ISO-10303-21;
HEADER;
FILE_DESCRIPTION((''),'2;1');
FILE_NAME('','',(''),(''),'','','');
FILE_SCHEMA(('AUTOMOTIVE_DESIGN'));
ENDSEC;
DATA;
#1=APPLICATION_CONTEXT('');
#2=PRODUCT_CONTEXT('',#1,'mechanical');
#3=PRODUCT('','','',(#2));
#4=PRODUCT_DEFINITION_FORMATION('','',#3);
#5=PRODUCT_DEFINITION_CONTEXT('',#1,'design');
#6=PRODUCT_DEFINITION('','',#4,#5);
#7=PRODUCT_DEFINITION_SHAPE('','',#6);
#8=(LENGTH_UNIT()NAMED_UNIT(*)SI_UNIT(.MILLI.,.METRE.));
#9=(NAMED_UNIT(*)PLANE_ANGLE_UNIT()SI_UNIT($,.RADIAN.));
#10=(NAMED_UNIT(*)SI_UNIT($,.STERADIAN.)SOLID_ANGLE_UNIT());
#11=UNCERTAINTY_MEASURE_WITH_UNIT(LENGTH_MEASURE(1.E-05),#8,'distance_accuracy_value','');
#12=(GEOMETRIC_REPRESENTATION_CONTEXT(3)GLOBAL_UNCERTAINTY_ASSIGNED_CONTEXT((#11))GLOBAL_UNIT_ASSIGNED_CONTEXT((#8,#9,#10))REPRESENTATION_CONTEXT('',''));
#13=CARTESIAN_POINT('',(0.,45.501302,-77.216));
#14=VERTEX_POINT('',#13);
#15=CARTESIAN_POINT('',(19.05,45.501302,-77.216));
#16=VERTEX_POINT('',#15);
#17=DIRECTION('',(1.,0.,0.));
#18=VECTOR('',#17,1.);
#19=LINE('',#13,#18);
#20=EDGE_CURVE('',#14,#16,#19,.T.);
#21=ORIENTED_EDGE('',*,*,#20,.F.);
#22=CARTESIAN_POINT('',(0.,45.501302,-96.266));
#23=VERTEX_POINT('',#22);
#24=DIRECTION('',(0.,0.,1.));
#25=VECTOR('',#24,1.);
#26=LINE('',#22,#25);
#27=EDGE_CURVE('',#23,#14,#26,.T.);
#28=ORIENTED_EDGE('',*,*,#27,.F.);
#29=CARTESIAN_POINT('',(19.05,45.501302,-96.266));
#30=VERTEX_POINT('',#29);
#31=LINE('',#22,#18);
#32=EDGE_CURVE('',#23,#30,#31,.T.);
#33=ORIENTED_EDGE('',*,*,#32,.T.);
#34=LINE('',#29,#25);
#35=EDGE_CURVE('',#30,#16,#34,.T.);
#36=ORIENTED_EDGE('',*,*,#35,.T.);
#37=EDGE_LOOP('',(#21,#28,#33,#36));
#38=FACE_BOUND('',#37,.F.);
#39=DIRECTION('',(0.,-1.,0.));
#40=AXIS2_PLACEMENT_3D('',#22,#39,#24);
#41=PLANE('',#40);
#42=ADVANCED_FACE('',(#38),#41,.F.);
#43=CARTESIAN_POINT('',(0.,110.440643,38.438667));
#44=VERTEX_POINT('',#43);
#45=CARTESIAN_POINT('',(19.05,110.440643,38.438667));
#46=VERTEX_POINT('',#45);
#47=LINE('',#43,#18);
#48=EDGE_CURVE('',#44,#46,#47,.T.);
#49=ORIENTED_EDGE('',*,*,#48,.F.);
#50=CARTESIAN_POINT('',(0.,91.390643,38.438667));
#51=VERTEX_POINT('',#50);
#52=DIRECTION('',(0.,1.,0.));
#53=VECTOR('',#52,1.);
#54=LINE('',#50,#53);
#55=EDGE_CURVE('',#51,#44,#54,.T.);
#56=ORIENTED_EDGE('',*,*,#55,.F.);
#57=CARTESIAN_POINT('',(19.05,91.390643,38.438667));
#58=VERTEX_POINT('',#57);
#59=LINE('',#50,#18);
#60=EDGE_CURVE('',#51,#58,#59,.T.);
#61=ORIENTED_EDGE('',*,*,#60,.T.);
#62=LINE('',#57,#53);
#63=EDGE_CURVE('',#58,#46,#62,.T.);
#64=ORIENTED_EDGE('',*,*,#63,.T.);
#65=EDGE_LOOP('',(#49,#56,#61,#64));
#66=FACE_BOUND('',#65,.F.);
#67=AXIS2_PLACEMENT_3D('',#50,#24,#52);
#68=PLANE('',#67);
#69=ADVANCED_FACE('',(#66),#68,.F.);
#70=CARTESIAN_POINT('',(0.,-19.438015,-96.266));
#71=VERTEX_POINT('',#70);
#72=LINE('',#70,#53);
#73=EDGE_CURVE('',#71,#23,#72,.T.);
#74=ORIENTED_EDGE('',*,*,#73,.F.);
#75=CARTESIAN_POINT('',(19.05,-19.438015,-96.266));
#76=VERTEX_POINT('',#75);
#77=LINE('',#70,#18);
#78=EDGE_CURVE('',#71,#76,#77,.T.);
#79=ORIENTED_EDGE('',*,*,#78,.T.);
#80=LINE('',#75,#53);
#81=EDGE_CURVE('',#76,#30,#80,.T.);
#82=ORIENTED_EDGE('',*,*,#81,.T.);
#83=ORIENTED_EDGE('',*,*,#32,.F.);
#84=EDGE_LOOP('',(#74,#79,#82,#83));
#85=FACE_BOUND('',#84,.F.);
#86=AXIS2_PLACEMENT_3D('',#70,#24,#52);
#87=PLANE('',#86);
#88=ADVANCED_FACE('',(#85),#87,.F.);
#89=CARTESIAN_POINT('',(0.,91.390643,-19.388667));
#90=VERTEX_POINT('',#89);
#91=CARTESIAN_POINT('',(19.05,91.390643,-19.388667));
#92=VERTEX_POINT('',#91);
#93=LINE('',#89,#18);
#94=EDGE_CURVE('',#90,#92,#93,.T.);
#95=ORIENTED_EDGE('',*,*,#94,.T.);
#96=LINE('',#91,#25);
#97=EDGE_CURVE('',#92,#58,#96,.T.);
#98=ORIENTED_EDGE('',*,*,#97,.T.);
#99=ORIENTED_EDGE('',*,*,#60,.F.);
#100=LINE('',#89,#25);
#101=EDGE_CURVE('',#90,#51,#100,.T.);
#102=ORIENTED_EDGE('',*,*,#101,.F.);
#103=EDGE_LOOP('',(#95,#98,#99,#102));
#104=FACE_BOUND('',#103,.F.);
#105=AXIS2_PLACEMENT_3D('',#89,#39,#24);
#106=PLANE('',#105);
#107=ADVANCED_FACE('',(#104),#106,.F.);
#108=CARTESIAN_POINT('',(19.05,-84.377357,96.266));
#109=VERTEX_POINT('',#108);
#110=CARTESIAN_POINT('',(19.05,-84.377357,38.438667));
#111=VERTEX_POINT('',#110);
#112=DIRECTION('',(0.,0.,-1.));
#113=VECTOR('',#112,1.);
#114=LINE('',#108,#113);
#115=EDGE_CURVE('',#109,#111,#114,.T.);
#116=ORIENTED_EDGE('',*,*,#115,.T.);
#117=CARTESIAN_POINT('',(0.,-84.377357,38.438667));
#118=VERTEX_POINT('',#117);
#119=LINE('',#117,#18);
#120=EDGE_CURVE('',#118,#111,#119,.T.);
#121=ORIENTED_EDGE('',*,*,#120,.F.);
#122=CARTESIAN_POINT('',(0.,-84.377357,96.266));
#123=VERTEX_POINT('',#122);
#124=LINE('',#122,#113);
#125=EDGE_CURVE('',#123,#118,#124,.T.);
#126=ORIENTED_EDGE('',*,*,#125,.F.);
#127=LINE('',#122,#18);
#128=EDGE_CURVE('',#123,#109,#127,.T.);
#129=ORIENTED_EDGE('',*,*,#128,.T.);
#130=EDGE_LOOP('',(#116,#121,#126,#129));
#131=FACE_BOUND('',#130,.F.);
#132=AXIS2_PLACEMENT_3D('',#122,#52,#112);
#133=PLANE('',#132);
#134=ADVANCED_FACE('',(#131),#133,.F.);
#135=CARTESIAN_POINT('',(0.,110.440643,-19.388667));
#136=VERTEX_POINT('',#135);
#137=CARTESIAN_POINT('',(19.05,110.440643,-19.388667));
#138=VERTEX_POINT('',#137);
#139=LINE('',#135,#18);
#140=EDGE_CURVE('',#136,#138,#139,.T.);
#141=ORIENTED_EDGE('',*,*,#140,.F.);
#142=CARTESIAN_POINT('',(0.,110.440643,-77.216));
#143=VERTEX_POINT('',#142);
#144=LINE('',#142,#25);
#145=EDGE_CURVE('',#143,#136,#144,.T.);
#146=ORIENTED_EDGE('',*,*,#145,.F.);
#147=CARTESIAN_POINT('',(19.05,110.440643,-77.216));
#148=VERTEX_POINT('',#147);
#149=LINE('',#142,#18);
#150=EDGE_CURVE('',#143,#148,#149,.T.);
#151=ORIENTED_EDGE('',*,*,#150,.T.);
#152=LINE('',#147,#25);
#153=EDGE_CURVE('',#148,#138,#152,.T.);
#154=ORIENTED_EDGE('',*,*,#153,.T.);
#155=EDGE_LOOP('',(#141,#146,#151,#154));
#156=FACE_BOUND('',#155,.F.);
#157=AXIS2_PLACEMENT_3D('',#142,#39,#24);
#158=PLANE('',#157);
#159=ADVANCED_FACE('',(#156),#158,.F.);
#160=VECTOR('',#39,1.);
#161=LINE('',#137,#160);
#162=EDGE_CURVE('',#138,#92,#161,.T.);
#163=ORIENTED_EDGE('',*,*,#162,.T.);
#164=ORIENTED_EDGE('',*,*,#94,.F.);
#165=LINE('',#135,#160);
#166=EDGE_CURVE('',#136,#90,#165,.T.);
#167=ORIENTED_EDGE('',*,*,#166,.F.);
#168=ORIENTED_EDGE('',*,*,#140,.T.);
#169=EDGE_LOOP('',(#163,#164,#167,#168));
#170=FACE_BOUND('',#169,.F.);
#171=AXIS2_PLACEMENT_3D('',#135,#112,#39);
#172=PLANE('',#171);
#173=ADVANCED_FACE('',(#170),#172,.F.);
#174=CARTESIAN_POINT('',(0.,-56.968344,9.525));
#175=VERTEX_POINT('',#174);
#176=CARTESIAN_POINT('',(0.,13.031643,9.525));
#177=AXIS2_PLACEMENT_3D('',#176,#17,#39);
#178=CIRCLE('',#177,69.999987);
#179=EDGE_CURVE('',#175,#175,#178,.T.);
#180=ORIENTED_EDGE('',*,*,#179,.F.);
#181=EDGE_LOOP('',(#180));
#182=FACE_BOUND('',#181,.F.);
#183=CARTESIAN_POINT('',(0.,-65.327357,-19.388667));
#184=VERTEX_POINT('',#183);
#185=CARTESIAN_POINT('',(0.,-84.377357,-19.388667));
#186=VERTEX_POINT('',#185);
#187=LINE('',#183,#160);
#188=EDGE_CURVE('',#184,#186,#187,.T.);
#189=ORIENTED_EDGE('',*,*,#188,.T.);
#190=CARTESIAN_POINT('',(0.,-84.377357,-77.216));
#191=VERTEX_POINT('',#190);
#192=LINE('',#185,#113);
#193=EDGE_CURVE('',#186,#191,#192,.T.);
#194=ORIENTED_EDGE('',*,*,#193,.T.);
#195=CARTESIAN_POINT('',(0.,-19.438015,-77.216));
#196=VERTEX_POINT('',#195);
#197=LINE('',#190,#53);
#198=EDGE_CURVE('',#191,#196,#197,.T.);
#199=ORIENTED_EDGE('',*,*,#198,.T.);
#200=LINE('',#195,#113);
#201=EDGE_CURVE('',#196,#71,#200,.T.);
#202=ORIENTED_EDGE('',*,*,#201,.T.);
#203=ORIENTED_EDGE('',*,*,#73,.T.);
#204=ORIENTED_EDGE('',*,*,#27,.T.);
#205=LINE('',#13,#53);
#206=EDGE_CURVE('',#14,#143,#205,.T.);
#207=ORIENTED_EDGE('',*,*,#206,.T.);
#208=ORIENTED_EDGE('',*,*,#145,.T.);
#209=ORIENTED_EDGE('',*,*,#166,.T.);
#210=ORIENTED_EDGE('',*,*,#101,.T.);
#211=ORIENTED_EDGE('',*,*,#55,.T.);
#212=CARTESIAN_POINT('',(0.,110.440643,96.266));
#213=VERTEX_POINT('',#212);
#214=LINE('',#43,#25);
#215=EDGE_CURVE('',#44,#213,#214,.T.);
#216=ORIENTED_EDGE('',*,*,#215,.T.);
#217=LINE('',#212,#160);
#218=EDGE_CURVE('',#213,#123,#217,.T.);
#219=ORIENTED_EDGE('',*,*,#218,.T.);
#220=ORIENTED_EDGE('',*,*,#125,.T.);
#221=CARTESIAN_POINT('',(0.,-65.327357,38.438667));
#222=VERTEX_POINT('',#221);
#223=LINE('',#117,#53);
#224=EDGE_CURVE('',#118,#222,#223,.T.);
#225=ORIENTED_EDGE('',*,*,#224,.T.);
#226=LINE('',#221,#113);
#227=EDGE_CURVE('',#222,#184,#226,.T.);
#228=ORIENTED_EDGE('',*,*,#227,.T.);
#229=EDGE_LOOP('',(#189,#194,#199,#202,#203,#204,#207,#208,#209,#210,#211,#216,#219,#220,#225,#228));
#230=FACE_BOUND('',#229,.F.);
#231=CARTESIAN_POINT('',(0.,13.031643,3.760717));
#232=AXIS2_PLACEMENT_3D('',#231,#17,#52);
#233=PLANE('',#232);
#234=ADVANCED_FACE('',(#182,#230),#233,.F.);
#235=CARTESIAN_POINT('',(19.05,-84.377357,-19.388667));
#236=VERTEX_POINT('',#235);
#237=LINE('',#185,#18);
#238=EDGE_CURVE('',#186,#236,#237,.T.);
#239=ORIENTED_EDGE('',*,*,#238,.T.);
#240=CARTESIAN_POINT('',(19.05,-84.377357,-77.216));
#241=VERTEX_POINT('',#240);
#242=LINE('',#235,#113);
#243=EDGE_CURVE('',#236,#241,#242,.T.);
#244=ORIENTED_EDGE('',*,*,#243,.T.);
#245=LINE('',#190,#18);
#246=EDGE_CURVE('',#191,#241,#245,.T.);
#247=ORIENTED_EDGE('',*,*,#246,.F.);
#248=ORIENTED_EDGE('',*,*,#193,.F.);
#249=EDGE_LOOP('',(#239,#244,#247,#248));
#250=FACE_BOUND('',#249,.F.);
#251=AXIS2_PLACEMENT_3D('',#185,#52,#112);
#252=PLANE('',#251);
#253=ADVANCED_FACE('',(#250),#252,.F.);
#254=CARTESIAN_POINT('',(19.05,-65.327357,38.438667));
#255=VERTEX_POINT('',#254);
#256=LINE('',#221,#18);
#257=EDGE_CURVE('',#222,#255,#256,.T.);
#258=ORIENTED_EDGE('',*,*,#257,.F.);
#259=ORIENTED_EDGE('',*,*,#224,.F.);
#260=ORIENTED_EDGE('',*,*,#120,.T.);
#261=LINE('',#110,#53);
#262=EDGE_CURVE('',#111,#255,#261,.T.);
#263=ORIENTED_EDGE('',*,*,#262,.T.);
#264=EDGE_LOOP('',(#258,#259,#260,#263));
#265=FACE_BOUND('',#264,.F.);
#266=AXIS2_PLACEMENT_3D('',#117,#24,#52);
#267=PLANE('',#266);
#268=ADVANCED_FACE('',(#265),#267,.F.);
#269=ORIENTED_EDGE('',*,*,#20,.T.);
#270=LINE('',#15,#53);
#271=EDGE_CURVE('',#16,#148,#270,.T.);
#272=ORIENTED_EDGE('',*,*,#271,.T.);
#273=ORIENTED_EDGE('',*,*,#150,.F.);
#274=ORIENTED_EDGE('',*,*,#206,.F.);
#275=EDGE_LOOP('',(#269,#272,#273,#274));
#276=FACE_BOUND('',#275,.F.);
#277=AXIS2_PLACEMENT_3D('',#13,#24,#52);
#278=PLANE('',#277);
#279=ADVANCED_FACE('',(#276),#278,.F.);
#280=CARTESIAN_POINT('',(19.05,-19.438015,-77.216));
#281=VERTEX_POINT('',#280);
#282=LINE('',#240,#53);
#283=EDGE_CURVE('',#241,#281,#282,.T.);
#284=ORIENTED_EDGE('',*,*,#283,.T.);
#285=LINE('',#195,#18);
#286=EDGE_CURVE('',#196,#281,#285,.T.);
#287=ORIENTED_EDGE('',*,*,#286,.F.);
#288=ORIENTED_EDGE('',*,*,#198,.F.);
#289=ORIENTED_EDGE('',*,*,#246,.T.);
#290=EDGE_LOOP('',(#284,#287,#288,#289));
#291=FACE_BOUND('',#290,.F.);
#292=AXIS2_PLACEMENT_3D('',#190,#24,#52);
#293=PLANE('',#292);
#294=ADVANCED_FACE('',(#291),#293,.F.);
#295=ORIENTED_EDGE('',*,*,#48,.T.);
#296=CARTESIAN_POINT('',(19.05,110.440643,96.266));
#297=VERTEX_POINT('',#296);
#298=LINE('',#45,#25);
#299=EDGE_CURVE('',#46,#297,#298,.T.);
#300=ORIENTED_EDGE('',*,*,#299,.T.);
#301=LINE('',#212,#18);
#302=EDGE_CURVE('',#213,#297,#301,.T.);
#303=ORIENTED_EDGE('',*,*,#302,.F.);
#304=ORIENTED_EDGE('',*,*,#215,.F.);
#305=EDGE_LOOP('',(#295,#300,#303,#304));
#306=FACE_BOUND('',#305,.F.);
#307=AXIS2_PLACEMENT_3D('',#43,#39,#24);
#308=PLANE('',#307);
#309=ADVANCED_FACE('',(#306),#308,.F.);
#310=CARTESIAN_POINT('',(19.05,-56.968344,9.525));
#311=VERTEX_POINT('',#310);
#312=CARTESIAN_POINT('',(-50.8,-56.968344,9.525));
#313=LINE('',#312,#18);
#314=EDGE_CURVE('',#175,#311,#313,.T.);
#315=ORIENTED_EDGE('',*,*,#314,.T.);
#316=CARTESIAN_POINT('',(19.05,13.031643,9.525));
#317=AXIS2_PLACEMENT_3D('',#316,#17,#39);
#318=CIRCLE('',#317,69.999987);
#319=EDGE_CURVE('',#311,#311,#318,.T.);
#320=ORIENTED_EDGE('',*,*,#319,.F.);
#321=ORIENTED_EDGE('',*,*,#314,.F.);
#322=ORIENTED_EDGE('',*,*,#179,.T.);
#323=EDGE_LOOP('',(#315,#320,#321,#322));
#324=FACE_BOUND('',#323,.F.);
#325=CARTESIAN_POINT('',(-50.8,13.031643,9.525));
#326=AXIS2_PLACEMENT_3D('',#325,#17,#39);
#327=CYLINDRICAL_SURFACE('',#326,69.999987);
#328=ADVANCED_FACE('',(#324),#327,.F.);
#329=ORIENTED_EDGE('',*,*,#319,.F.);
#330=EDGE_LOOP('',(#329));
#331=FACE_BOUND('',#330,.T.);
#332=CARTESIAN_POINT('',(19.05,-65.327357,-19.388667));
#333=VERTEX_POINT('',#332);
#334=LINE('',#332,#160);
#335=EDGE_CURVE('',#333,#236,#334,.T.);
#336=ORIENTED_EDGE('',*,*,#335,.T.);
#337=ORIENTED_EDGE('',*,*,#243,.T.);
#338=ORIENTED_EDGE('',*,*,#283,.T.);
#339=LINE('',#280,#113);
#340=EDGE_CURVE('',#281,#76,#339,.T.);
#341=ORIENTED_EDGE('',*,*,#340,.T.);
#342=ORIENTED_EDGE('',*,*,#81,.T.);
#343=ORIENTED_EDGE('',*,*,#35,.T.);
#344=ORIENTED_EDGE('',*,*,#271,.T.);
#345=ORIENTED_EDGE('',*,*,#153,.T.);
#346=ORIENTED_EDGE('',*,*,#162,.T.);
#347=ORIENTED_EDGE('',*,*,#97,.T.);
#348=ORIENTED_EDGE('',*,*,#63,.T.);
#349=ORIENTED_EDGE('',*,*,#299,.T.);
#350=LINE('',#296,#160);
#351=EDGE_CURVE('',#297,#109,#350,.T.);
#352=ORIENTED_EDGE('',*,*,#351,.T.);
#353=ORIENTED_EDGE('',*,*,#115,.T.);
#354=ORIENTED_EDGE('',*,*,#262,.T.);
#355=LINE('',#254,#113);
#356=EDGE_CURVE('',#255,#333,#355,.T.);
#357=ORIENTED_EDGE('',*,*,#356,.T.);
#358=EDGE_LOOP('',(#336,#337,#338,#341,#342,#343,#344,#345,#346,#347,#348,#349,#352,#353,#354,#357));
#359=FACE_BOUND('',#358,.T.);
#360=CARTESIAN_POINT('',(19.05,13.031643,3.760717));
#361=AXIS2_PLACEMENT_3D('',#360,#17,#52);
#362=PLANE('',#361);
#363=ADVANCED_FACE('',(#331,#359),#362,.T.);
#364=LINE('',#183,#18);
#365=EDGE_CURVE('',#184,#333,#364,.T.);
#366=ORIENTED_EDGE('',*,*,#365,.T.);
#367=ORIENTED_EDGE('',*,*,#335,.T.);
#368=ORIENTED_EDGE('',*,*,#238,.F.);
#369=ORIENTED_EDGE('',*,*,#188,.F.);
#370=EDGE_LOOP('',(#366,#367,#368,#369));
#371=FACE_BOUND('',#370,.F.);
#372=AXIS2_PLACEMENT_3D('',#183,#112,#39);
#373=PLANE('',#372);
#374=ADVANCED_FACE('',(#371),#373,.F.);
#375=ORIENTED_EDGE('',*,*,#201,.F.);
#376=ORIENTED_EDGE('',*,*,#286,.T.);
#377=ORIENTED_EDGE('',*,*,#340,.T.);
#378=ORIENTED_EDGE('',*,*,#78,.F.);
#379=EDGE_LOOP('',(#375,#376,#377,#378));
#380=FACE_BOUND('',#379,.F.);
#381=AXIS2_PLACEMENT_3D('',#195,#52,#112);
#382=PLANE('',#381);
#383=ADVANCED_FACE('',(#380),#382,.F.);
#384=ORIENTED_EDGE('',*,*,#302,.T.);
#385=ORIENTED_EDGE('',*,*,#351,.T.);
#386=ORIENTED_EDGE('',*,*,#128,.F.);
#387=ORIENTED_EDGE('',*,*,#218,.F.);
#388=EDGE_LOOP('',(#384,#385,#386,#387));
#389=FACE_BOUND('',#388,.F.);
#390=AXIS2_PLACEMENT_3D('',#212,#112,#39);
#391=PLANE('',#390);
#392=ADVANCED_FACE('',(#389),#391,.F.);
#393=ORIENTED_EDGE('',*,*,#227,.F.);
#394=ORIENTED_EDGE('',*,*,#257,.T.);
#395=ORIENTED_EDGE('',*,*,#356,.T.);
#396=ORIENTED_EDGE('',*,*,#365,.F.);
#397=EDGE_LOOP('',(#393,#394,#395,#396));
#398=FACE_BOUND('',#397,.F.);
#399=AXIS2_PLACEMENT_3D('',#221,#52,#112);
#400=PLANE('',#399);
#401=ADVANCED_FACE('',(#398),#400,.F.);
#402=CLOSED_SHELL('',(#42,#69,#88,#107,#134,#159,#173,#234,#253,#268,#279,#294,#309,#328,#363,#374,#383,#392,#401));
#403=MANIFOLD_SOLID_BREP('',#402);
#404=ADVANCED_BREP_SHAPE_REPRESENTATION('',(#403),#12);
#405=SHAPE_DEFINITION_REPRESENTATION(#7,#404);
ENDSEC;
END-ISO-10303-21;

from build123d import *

# Parameters (mm, degrees)
F1_DEPTH = 19.05
F2_D     = 139.999974
F2_DEPTH = 50.8
F2_TIP   = 42.0602355207


with BuildPart() as f1:
    # F0 (on Right) → F1 (new body)
    with BuildSketch(Plane.YZ):
        Polygon((110.4406434166, 38.438666836), (110.4406434166, 96.266), (-84.3773565834, 96.266), (-84.3773565834, 38.438666836), (-65.3273565834, 38.438666836), (-65.3273565834, -19.388666836), (-84.3773565834, -19.388666836), (-84.3773565834, -77.216), (-19.4380147834, -77.216), (-19.4380147834, -96.266), (45.5013016166, -96.266), (45.5013016166, -77.216), (110.4406434166, -77.216), (110.4406434166, -19.388666836), (91.3906434166, -19.388666836), (91.3906434166, 38.438666836), align=None)
    extrude(amount=F1_DEPTH)

    # F2
    with Locations(Plane(origin=(0, 0, 0), x_dir=(0, 1, 0), z_dir=(-1, 0, 0))):
        with Locations((13.0316434166, -9.525)):
            Hole(F2_D / 2, depth=F2_DEPTH)
            with Locations((0, 0, -(F2_DEPTH + F2_TIP / 2))):  # 118° drill point
                Cone(0, F2_D / 2, F2_TIP, mode=Mode.SUBTRACT)


solid = f1.part
